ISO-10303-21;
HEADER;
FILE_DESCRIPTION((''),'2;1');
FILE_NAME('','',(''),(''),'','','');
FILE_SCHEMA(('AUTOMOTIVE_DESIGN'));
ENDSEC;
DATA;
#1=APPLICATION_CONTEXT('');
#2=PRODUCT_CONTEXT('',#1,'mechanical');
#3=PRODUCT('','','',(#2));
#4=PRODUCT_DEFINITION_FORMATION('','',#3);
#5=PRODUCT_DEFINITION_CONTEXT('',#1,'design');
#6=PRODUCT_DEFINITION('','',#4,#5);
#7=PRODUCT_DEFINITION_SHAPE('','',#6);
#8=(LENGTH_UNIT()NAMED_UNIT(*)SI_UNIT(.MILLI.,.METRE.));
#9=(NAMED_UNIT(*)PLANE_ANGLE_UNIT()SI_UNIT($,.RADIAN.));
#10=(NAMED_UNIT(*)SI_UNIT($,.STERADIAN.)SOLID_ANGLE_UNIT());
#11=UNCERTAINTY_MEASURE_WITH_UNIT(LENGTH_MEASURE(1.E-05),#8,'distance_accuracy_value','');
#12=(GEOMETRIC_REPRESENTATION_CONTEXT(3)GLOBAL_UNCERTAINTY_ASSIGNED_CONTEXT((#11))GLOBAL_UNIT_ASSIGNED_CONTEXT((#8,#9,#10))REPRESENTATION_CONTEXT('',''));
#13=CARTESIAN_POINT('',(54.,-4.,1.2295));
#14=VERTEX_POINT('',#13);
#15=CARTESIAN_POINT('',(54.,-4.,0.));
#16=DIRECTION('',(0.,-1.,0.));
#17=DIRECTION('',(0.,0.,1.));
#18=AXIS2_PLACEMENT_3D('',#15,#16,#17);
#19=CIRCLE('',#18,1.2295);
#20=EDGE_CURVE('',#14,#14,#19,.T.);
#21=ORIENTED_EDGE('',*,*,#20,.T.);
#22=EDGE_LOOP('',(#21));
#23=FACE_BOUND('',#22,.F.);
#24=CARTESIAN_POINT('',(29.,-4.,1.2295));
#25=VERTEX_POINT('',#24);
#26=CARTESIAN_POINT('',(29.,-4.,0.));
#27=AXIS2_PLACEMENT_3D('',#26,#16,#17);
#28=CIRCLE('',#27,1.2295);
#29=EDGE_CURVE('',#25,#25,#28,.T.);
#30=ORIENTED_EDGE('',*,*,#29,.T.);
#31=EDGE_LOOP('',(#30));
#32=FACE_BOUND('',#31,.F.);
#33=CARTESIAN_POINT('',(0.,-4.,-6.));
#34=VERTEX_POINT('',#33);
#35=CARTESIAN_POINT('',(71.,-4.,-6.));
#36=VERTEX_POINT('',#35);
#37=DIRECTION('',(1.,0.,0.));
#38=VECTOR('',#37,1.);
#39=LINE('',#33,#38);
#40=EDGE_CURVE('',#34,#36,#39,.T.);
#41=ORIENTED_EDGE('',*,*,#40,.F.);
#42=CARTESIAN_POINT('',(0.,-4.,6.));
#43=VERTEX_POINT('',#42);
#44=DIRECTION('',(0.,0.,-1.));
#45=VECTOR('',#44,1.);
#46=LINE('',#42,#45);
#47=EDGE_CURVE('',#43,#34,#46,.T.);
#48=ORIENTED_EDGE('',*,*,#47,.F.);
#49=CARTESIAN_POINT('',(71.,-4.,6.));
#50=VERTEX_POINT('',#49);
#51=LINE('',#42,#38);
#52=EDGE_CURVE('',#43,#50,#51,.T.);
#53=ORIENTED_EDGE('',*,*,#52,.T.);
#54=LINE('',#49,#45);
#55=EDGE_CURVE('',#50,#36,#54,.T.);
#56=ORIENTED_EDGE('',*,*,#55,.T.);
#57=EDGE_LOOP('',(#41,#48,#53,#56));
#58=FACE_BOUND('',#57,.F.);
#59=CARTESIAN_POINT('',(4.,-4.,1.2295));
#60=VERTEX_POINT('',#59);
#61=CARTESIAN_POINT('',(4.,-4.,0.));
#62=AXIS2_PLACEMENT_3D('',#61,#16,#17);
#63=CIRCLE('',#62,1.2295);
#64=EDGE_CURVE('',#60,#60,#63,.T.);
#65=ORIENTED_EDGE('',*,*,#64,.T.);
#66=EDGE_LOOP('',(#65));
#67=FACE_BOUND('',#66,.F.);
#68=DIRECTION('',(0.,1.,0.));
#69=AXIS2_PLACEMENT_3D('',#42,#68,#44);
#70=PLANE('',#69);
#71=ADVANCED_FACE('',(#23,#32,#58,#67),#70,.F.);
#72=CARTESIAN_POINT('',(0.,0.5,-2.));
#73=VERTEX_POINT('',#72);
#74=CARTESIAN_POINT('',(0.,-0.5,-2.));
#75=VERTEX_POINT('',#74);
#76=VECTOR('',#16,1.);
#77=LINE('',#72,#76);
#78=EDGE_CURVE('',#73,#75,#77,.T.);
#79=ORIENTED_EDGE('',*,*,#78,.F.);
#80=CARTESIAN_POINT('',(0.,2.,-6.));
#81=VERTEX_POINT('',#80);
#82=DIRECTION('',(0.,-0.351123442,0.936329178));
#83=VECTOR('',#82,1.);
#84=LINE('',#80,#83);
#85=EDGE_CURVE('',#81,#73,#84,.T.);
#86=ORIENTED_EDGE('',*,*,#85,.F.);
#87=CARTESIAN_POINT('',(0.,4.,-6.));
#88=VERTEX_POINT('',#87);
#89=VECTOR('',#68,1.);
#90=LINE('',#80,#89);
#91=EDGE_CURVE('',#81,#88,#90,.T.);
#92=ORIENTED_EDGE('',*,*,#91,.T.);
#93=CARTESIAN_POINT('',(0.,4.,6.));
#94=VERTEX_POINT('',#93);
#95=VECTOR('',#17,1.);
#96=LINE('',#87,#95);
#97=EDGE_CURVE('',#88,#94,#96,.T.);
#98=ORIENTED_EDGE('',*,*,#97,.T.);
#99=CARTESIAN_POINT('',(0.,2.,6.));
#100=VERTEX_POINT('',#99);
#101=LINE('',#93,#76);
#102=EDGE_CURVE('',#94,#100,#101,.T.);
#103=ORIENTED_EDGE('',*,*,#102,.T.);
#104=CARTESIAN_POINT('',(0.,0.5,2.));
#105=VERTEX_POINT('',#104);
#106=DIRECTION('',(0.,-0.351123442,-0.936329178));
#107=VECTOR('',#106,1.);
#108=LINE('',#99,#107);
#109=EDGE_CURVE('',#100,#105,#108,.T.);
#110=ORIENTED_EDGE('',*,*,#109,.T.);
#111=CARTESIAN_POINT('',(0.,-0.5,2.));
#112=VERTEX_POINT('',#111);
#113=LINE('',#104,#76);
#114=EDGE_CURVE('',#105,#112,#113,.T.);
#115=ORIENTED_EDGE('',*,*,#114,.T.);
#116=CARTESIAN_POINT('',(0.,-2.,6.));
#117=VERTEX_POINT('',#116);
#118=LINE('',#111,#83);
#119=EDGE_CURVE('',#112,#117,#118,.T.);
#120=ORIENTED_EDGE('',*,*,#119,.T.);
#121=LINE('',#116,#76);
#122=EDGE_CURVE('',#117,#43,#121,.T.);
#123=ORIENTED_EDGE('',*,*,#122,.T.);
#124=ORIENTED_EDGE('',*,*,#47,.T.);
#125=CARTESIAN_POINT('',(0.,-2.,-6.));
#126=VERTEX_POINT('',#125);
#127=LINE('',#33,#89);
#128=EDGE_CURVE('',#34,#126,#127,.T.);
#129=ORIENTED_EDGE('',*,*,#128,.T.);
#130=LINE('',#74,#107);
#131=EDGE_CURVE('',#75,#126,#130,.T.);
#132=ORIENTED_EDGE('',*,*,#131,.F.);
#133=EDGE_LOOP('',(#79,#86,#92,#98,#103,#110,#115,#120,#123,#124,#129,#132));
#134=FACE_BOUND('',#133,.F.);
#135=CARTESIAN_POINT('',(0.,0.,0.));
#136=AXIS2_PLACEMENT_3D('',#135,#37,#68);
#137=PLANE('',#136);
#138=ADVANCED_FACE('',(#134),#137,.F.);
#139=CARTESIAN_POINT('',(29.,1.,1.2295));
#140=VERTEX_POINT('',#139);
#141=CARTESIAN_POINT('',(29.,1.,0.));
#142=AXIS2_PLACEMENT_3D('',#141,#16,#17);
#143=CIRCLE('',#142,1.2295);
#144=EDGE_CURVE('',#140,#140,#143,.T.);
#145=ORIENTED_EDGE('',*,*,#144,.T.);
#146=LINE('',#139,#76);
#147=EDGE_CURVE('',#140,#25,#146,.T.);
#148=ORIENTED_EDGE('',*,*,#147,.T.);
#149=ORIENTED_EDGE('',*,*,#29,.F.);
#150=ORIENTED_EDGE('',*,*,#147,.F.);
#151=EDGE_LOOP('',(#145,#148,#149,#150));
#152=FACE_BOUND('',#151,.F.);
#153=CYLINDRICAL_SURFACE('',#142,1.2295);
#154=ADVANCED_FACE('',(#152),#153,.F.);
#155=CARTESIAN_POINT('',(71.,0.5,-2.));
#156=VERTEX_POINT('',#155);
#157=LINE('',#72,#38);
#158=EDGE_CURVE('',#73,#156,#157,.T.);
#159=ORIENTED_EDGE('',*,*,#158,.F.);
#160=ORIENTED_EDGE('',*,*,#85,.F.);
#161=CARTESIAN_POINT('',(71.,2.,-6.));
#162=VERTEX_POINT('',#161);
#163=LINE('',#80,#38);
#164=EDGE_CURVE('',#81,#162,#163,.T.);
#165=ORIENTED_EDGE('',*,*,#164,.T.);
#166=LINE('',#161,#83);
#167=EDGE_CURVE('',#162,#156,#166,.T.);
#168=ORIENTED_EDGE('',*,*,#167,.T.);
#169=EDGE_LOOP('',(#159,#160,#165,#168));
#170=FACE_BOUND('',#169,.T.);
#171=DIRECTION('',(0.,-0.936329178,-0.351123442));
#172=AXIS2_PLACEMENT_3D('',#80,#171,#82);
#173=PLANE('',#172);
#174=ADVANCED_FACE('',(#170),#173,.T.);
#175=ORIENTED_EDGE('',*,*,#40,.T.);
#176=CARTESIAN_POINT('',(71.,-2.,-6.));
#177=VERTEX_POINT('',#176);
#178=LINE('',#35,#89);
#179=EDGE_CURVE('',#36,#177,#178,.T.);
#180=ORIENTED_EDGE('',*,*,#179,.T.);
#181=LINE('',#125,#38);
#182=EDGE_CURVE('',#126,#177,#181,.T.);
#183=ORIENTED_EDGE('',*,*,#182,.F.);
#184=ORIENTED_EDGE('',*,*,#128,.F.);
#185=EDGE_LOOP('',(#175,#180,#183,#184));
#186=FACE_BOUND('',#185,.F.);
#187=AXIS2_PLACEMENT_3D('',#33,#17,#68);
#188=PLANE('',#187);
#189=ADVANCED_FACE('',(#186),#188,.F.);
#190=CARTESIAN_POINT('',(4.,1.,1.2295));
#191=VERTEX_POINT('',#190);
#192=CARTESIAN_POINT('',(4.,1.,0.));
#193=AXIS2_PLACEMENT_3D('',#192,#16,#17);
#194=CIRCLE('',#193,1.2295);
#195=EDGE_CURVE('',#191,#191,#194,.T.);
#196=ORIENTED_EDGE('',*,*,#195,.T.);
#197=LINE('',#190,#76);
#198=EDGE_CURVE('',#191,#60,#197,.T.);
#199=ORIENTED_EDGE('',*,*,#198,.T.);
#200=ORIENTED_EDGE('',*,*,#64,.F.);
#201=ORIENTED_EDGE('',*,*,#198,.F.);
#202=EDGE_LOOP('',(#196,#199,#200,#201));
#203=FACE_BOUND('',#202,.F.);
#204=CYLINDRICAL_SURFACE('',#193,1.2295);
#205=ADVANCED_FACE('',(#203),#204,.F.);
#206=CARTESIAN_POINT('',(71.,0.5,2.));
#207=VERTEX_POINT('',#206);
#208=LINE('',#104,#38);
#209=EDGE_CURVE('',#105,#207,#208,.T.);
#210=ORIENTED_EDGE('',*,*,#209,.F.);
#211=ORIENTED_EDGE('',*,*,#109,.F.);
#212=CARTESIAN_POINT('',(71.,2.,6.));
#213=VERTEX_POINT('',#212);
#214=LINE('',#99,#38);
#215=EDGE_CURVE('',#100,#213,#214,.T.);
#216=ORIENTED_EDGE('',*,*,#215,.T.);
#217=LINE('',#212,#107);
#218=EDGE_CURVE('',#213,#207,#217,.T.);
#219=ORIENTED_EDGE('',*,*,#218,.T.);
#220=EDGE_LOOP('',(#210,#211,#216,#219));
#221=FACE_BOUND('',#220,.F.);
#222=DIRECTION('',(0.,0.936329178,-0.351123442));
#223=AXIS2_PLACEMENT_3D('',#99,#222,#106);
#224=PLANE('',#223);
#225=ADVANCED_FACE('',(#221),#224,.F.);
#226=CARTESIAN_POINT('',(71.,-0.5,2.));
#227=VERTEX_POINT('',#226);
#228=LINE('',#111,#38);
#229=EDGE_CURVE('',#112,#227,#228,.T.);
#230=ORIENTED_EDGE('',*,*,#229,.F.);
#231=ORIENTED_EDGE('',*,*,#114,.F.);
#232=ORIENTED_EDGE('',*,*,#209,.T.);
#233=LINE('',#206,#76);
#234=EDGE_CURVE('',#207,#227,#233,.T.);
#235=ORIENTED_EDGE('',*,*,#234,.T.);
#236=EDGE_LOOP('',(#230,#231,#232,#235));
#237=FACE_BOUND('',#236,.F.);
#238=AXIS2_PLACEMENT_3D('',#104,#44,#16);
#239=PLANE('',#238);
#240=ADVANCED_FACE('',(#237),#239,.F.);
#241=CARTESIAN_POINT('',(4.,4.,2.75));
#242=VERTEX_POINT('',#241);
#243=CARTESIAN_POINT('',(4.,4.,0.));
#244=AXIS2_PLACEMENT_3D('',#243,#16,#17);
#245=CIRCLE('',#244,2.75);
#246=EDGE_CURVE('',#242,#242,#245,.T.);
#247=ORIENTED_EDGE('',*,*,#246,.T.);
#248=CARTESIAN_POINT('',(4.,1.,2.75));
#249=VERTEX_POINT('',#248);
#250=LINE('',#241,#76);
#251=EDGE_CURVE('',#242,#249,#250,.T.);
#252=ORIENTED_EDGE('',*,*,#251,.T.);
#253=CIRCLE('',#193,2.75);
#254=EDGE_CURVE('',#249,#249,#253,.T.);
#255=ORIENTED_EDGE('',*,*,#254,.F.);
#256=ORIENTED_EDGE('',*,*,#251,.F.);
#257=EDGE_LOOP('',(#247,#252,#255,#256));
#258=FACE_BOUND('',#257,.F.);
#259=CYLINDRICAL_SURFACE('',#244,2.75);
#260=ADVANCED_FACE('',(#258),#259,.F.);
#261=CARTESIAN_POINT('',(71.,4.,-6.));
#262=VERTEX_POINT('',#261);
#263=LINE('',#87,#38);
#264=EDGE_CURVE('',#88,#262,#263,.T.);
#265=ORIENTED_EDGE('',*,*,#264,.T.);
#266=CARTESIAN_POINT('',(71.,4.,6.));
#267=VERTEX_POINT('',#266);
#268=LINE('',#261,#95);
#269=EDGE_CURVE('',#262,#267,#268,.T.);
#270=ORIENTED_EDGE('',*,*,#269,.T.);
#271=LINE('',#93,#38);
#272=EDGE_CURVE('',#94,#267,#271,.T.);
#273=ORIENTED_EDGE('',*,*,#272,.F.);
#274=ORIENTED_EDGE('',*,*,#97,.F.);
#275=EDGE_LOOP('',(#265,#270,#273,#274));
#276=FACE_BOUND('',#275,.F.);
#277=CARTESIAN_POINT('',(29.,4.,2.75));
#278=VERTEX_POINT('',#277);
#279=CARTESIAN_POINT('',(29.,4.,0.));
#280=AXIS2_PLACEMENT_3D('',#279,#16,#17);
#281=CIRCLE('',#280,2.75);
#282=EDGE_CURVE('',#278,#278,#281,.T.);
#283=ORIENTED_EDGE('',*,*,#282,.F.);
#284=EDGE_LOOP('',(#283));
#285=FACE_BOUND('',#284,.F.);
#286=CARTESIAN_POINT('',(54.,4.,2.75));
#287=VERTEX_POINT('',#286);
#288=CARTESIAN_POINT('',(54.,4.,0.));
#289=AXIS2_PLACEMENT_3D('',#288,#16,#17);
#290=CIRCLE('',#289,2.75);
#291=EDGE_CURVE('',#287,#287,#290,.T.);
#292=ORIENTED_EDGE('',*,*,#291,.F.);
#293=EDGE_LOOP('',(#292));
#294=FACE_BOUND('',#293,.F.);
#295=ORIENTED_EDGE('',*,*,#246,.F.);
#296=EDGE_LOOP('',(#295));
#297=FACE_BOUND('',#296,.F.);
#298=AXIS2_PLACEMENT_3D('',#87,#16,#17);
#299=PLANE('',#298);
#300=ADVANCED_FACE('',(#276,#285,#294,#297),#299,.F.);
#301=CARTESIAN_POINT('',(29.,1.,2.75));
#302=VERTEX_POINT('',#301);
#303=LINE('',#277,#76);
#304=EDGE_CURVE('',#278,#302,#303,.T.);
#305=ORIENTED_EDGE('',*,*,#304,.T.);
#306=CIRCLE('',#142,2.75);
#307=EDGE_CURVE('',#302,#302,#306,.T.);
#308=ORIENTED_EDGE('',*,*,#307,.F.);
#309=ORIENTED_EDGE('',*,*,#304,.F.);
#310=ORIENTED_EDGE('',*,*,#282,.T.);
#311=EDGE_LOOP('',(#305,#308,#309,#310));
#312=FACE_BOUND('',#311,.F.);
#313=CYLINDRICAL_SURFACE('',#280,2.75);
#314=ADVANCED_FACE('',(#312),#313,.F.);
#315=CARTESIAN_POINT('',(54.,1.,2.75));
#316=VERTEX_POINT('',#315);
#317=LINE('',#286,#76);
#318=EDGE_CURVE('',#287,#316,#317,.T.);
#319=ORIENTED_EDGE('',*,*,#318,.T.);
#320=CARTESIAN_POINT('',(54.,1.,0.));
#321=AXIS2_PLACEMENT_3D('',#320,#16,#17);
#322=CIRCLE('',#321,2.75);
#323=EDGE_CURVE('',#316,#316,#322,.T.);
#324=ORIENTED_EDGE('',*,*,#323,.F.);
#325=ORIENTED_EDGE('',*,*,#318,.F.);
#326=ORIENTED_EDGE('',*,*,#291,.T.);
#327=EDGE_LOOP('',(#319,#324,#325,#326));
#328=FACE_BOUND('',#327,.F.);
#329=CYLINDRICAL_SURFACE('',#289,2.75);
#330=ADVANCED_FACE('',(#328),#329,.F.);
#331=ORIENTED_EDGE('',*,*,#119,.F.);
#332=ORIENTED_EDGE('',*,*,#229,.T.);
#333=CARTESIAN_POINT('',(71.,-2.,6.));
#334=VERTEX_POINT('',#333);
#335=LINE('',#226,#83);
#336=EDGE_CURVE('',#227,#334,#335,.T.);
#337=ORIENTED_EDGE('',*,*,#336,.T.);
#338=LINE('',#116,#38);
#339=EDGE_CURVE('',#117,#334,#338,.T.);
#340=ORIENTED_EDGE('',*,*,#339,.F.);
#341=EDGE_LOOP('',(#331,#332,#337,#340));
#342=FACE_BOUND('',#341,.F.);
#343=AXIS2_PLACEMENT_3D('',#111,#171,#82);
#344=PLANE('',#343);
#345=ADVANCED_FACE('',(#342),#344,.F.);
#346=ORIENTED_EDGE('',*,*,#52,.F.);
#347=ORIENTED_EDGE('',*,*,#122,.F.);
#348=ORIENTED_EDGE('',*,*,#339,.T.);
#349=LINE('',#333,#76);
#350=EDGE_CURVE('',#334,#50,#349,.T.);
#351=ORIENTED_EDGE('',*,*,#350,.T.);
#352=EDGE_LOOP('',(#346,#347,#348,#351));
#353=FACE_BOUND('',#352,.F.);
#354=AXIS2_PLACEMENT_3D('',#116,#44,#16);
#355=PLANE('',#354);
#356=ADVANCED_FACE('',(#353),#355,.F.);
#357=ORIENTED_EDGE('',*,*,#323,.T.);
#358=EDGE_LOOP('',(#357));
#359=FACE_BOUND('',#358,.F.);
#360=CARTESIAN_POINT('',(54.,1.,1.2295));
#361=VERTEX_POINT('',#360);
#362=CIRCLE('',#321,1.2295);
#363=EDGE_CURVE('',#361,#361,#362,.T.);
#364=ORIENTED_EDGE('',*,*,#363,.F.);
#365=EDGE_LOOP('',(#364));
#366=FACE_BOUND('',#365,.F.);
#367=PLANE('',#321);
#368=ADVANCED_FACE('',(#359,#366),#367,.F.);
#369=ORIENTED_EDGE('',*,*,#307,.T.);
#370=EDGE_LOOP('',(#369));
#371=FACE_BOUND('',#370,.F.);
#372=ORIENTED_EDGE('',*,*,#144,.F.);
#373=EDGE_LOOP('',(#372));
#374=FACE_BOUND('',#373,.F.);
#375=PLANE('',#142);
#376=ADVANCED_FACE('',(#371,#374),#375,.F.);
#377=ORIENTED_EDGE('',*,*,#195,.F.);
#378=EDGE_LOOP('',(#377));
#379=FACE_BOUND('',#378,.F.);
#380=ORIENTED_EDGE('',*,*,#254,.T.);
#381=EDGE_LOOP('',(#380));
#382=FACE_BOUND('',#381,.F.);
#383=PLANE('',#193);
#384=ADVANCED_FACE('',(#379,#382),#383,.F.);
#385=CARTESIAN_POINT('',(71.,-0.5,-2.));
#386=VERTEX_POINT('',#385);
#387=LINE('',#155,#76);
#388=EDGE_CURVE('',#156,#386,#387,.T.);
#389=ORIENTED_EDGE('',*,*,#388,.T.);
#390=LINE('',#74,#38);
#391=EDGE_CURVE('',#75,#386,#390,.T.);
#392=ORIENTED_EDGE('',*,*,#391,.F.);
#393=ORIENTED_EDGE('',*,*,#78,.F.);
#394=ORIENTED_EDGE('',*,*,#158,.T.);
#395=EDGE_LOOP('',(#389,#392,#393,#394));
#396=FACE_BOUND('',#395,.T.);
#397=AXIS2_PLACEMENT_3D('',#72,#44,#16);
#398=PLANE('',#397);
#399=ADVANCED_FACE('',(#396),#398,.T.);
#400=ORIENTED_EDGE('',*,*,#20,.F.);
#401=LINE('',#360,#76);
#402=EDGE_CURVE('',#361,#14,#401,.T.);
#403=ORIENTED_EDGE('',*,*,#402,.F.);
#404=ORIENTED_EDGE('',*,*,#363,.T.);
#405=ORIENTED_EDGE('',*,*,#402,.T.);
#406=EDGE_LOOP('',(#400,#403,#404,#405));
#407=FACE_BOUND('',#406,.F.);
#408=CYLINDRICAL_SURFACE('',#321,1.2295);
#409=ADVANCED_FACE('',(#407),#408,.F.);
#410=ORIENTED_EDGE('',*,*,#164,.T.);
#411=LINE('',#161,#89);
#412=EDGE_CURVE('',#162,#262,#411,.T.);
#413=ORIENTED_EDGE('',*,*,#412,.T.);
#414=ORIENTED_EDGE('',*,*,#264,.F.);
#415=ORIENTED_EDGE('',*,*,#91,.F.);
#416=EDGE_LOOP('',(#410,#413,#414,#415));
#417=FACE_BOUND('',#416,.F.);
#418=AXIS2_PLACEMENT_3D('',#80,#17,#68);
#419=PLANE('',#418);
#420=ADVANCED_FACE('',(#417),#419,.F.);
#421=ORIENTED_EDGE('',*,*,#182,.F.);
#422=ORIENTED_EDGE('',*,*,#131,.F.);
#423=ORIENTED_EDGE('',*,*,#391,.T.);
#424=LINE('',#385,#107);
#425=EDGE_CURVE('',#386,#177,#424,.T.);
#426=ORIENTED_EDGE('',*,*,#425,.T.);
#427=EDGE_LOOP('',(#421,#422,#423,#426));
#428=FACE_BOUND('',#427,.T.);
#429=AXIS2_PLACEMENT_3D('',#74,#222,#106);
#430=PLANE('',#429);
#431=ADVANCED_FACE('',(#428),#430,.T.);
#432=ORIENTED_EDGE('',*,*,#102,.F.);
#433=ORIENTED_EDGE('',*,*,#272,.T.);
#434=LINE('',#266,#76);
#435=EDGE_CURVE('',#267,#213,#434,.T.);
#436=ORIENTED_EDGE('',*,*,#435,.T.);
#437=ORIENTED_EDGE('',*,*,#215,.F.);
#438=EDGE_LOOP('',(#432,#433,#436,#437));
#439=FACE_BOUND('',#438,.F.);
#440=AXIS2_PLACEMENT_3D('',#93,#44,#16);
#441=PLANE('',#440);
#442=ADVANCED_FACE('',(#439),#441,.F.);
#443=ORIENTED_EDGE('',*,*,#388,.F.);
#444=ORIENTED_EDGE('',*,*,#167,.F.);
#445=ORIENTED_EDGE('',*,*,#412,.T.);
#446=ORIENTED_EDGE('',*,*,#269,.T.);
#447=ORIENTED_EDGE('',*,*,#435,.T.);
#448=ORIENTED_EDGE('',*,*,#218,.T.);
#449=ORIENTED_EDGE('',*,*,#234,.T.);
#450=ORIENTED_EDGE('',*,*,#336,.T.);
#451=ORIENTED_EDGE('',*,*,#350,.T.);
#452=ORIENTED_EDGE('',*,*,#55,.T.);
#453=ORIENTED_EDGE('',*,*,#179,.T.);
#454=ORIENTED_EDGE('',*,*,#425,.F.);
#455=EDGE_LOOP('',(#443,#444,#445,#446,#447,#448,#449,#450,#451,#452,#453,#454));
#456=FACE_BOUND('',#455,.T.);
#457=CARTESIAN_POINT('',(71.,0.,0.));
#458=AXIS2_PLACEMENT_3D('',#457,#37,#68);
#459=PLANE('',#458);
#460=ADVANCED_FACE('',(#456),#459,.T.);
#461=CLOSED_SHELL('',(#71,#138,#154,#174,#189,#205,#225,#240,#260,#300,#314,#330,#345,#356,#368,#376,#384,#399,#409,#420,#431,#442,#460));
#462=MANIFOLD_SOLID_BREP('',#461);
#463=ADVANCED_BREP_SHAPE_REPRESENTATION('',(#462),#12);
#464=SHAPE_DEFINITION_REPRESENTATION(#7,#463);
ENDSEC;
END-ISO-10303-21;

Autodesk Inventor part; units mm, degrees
ref_plane "YZ Plane" through (0, 0, 0) normal (1, 0, 0) x (0, 1, 0)
ref_plane "XZ Plane" through (0, 0, 0) normal (0, 1, 0) x (-1, 0, 0)
ref_plane "XY Plane" through (0, 0, 0) normal (0, 0, 1) x (1, 0, 0)
sketch "Sketch1" plane through (0, 0, 0) normal (1, 0, 0) x (0, 1, 0)
  line L0 (-4, 6) -> (-4, -6)
  line L1 (-4, -6) -> (-2, -6)
  line L2 (2, -6) -> (4, -6)
  line L3 (4, -6) -> (4, 6)
  line L4 (4, 6) -> (2, 6)
  line L5 (2, 6) -> (0.5, 2)
  line L6 (0.5, 2) -> (-0.5, 2)
  line L7 (-0.5, 2) -> (-2, 6)
  line L8 (-2, 6) -> (-4, 6)
  line L9 (2, -6) -> (0.5, -2)
  line L10 (0.5, -2) -> (-0.5, -2)
  line L11 (-0.5, -2) -> (-2, -6)
  point P0 (0, 0)
  point P1 (-4, 0)
  point P2 (4, 0)
  point P3 (0, 2)
  point P4 (0, -2)
  dimension "d3" = 8
  dimension "d4" = 12
  dimension "d5" = 4
  dimension "d6" = 2
  dimension "d7" = 2
  dimension "d17" = 2
  dimension "d18" = 2
  dimension "d19" = 1
  dimension "d20" = 1
  dimension "d21" = 4
extrude "Extrusion1" add sketch "Sketch1" along normal blind 71
sketch "Sketch2" plane through (0, 4, 6) normal (0, 1, 0) x (1, 0, 0)
  line L0 (0, 12) -> (0, 0) projected
  point P0 (0, 6)
  point P1 (4, 6)
  point P2 (29, 6)
  point P3 (0, 6)
  point P4 (0, 6)
  point P5 (54, 6)
  dimension "d22" = 4
  dimension "d23" = 25
  dimension "d31" = 25
hole "Hole1" at (4, 4, 0) at (29, 4, 0) at (54, 4, 0) direction (0, -1, 0) diameter 2.459 end through all counterbore diameter 5.5 counterbore depth 3 thread size "M3x0.5" class "6H" standard "ISO Metric profile"
properties part number "lm_guide_rail" material "Stainless Steel"
